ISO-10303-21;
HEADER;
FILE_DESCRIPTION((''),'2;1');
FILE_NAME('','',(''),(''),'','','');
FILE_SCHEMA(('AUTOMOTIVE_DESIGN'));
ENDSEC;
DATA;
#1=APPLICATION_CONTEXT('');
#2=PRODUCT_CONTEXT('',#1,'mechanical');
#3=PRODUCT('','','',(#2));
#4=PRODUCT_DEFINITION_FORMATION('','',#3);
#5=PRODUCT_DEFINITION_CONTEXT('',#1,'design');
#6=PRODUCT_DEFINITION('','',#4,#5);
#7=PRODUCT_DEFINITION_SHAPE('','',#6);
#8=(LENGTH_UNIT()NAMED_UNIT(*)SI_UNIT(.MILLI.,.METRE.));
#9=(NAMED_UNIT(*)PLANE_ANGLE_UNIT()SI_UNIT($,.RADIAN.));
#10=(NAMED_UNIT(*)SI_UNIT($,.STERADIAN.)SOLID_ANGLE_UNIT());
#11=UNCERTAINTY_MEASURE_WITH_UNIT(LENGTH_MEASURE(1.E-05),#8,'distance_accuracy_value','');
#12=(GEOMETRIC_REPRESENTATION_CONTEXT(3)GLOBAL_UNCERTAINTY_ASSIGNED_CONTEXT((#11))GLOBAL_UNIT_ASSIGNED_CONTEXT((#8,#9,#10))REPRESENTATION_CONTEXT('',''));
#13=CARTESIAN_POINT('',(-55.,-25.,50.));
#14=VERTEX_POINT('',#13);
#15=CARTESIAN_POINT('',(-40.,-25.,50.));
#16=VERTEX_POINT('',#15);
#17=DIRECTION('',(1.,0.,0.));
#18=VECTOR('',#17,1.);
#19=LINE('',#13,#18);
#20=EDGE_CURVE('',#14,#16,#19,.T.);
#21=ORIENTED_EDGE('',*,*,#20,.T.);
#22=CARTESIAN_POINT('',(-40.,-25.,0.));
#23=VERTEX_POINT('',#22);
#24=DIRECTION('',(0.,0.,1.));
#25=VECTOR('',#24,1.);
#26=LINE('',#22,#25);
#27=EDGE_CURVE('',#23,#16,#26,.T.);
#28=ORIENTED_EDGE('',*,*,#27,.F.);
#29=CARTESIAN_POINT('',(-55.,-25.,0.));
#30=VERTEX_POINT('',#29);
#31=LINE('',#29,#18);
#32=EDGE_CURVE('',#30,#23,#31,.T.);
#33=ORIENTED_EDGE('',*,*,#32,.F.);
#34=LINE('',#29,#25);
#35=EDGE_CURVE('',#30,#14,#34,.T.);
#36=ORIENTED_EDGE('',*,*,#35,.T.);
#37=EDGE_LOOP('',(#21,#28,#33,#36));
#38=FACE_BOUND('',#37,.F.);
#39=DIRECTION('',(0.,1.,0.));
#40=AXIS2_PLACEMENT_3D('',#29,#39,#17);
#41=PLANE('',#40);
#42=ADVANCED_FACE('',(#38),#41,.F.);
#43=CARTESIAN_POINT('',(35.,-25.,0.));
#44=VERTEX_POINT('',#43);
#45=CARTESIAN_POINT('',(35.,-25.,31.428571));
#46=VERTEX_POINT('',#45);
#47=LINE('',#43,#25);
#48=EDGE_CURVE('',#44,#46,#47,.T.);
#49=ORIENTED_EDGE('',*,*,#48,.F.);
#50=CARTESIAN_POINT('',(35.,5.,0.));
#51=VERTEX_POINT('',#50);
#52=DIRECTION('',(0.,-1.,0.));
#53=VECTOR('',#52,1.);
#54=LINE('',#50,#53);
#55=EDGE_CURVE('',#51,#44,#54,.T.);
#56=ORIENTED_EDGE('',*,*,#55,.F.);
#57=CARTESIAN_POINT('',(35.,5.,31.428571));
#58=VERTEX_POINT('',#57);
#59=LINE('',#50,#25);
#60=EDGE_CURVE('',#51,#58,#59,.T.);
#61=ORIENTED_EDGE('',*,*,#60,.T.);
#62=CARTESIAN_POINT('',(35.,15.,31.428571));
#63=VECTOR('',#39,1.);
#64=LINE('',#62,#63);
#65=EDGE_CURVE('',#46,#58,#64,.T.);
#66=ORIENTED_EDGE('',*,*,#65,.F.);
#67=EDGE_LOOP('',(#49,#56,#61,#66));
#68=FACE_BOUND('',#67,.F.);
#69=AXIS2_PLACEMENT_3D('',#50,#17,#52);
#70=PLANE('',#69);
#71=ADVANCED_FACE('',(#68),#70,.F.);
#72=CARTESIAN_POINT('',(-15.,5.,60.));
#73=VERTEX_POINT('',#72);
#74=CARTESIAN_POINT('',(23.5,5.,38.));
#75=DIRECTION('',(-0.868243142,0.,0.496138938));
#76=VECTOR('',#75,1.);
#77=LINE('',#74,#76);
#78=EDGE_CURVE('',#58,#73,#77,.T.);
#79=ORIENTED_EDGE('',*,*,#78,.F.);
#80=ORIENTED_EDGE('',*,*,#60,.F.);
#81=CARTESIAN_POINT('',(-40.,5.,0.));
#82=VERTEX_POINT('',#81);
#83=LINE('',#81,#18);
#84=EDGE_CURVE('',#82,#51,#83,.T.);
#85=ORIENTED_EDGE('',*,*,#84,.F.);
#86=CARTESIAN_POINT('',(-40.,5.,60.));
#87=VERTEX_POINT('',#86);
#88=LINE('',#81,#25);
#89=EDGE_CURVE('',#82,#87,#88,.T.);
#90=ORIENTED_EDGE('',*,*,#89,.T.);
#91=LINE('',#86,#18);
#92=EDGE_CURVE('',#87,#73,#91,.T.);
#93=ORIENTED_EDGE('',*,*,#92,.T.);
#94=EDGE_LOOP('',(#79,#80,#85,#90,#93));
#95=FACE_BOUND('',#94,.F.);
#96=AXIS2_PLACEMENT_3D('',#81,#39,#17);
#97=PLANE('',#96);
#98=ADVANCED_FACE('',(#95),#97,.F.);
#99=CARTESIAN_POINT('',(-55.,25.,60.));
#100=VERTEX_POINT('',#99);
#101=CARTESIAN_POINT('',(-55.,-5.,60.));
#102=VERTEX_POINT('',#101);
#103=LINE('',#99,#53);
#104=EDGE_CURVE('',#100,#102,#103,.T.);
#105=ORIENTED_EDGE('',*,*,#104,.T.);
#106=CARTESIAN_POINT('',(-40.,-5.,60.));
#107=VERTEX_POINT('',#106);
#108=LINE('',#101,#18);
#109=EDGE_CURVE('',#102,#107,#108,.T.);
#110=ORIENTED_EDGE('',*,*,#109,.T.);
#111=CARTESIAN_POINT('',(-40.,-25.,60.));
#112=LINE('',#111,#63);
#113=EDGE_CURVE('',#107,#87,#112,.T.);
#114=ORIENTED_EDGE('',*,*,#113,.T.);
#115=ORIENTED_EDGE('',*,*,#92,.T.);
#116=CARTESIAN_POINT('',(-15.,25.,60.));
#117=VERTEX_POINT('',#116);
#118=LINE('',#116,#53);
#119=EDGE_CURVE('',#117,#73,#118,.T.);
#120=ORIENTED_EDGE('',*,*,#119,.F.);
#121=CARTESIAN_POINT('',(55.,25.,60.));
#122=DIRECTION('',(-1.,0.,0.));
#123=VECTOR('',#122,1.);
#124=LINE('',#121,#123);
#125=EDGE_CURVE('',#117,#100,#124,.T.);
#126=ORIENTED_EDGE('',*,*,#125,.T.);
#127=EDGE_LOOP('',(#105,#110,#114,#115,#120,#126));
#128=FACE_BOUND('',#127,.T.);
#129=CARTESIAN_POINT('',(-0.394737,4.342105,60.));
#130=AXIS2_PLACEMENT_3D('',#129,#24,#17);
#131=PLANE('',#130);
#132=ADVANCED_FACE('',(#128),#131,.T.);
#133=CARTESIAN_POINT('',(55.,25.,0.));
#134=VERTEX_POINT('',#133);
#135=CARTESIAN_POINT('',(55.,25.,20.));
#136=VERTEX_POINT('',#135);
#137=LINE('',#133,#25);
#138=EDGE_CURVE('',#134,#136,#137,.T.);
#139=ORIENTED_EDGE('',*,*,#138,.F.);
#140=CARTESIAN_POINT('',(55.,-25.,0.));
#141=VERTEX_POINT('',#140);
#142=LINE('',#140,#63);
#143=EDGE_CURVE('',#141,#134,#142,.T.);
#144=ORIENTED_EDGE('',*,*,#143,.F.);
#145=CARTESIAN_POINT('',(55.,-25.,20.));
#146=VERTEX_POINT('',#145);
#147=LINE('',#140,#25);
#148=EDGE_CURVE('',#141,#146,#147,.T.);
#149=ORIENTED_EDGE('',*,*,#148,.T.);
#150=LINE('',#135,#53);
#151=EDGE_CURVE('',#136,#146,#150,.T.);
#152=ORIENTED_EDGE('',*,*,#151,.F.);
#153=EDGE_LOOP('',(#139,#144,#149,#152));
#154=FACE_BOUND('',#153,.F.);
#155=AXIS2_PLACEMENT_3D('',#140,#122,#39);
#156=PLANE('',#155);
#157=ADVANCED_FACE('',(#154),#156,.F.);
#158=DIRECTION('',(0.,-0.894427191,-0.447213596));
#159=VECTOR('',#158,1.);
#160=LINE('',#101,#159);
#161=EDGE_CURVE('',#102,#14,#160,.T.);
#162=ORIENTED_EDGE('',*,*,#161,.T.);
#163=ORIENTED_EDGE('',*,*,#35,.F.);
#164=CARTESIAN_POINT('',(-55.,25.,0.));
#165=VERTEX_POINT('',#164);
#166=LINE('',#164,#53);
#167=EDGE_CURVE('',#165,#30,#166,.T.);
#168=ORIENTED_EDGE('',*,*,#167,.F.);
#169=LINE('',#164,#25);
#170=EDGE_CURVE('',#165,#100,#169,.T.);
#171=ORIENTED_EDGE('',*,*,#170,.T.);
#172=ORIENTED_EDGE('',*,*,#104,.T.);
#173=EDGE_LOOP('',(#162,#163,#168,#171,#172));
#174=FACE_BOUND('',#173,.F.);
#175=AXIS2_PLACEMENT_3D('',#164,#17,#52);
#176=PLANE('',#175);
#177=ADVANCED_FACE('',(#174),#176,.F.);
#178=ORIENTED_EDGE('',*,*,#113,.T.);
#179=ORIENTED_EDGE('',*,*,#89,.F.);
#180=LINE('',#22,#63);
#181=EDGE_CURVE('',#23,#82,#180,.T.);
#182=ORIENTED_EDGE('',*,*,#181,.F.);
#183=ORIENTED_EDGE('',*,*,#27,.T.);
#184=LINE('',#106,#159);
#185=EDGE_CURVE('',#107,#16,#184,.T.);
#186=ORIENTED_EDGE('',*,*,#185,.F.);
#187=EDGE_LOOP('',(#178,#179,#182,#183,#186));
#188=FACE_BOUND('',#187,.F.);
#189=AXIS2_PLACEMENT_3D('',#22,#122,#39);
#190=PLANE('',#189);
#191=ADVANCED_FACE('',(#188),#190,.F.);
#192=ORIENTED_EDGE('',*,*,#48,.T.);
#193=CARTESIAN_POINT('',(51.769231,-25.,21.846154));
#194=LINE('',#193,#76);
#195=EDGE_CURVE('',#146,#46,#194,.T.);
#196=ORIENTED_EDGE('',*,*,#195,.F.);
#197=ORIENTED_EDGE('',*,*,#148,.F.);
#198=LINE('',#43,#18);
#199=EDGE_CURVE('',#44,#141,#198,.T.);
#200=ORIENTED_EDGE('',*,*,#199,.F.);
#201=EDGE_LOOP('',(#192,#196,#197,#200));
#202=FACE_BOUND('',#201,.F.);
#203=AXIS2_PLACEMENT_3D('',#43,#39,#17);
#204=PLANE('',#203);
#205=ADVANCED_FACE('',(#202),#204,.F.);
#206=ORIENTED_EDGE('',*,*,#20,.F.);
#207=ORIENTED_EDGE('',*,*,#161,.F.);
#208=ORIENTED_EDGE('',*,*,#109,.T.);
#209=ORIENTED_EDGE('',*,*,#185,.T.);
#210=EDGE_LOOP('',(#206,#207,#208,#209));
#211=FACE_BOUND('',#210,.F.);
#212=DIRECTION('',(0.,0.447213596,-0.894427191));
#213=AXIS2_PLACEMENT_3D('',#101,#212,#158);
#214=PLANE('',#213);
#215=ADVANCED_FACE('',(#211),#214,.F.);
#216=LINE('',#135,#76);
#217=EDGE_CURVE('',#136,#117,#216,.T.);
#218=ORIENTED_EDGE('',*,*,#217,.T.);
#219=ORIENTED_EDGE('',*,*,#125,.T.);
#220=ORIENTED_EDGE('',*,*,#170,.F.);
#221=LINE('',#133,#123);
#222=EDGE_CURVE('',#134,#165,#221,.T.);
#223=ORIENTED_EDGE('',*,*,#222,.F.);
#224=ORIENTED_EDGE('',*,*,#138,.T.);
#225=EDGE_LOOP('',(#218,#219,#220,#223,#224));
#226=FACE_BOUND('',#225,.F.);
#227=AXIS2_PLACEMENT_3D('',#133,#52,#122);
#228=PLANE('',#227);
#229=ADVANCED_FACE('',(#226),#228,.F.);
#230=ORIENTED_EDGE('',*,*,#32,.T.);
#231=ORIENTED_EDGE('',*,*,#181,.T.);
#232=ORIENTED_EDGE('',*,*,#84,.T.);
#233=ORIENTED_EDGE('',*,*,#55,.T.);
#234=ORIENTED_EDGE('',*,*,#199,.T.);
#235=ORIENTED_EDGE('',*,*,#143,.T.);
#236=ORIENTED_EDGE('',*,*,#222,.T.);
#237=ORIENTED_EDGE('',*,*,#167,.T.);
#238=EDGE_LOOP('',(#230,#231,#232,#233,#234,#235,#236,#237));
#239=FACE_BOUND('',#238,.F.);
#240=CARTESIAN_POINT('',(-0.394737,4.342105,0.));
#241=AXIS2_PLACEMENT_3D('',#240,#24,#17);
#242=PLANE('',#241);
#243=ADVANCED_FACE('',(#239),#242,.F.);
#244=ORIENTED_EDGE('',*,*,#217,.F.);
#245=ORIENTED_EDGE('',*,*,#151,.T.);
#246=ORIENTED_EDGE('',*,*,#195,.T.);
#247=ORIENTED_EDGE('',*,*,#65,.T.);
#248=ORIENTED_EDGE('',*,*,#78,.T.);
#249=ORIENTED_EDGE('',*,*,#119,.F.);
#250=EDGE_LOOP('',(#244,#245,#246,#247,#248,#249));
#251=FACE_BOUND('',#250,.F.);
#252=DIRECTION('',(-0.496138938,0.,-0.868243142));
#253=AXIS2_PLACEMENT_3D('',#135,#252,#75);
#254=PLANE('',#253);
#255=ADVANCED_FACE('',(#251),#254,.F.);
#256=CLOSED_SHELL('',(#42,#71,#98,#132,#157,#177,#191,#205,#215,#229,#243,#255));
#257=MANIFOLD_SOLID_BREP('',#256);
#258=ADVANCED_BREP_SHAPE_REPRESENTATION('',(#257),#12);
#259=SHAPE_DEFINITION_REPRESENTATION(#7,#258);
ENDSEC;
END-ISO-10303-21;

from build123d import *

# Parameters (mm, degrees)
F1_DEPTH = 60
F3_DEPTH = 15
F5_DEPTH = 60


# Not quite as in the source:
# - a feature names something its author has since deleted; it is built from what else it names


with BuildPart() as f1:
    # F0 (on Top) → F1 (new body)
    with BuildSketch(Plane.XY):
        Polygon((55, 25), (-55, 25), (-55, -25), (-40, -25), (-40, 5), (35, 5), (35, -25), (55, -25), align=None)
    extrude(amount=F1_DEPTH)

    # F2 (on face) → F3 (cut)
    with BuildSketch(Plane(origin=(-55, 0, 0), x_dir=(0, -1, 0), z_dir=(-1, 0, 0))):
        Polygon((25, 60), (5, 60), (25, 50), align=None)
    extrude(amount=-F3_DEPTH, mode=Mode.SUBTRACT)

    # F4 (on face) → F5 (cut)
    with BuildSketch(Plane(origin=(0, 25, 0), x_dir=(-1, 0, 0), z_dir=(0, 1, 0))):
        Polygon((15, 60), (-55, 60), (-55, 20), align=None)
    extrude(amount=-F5_DEPTH, mode=Mode.SUBTRACT)


solid = f1.part
